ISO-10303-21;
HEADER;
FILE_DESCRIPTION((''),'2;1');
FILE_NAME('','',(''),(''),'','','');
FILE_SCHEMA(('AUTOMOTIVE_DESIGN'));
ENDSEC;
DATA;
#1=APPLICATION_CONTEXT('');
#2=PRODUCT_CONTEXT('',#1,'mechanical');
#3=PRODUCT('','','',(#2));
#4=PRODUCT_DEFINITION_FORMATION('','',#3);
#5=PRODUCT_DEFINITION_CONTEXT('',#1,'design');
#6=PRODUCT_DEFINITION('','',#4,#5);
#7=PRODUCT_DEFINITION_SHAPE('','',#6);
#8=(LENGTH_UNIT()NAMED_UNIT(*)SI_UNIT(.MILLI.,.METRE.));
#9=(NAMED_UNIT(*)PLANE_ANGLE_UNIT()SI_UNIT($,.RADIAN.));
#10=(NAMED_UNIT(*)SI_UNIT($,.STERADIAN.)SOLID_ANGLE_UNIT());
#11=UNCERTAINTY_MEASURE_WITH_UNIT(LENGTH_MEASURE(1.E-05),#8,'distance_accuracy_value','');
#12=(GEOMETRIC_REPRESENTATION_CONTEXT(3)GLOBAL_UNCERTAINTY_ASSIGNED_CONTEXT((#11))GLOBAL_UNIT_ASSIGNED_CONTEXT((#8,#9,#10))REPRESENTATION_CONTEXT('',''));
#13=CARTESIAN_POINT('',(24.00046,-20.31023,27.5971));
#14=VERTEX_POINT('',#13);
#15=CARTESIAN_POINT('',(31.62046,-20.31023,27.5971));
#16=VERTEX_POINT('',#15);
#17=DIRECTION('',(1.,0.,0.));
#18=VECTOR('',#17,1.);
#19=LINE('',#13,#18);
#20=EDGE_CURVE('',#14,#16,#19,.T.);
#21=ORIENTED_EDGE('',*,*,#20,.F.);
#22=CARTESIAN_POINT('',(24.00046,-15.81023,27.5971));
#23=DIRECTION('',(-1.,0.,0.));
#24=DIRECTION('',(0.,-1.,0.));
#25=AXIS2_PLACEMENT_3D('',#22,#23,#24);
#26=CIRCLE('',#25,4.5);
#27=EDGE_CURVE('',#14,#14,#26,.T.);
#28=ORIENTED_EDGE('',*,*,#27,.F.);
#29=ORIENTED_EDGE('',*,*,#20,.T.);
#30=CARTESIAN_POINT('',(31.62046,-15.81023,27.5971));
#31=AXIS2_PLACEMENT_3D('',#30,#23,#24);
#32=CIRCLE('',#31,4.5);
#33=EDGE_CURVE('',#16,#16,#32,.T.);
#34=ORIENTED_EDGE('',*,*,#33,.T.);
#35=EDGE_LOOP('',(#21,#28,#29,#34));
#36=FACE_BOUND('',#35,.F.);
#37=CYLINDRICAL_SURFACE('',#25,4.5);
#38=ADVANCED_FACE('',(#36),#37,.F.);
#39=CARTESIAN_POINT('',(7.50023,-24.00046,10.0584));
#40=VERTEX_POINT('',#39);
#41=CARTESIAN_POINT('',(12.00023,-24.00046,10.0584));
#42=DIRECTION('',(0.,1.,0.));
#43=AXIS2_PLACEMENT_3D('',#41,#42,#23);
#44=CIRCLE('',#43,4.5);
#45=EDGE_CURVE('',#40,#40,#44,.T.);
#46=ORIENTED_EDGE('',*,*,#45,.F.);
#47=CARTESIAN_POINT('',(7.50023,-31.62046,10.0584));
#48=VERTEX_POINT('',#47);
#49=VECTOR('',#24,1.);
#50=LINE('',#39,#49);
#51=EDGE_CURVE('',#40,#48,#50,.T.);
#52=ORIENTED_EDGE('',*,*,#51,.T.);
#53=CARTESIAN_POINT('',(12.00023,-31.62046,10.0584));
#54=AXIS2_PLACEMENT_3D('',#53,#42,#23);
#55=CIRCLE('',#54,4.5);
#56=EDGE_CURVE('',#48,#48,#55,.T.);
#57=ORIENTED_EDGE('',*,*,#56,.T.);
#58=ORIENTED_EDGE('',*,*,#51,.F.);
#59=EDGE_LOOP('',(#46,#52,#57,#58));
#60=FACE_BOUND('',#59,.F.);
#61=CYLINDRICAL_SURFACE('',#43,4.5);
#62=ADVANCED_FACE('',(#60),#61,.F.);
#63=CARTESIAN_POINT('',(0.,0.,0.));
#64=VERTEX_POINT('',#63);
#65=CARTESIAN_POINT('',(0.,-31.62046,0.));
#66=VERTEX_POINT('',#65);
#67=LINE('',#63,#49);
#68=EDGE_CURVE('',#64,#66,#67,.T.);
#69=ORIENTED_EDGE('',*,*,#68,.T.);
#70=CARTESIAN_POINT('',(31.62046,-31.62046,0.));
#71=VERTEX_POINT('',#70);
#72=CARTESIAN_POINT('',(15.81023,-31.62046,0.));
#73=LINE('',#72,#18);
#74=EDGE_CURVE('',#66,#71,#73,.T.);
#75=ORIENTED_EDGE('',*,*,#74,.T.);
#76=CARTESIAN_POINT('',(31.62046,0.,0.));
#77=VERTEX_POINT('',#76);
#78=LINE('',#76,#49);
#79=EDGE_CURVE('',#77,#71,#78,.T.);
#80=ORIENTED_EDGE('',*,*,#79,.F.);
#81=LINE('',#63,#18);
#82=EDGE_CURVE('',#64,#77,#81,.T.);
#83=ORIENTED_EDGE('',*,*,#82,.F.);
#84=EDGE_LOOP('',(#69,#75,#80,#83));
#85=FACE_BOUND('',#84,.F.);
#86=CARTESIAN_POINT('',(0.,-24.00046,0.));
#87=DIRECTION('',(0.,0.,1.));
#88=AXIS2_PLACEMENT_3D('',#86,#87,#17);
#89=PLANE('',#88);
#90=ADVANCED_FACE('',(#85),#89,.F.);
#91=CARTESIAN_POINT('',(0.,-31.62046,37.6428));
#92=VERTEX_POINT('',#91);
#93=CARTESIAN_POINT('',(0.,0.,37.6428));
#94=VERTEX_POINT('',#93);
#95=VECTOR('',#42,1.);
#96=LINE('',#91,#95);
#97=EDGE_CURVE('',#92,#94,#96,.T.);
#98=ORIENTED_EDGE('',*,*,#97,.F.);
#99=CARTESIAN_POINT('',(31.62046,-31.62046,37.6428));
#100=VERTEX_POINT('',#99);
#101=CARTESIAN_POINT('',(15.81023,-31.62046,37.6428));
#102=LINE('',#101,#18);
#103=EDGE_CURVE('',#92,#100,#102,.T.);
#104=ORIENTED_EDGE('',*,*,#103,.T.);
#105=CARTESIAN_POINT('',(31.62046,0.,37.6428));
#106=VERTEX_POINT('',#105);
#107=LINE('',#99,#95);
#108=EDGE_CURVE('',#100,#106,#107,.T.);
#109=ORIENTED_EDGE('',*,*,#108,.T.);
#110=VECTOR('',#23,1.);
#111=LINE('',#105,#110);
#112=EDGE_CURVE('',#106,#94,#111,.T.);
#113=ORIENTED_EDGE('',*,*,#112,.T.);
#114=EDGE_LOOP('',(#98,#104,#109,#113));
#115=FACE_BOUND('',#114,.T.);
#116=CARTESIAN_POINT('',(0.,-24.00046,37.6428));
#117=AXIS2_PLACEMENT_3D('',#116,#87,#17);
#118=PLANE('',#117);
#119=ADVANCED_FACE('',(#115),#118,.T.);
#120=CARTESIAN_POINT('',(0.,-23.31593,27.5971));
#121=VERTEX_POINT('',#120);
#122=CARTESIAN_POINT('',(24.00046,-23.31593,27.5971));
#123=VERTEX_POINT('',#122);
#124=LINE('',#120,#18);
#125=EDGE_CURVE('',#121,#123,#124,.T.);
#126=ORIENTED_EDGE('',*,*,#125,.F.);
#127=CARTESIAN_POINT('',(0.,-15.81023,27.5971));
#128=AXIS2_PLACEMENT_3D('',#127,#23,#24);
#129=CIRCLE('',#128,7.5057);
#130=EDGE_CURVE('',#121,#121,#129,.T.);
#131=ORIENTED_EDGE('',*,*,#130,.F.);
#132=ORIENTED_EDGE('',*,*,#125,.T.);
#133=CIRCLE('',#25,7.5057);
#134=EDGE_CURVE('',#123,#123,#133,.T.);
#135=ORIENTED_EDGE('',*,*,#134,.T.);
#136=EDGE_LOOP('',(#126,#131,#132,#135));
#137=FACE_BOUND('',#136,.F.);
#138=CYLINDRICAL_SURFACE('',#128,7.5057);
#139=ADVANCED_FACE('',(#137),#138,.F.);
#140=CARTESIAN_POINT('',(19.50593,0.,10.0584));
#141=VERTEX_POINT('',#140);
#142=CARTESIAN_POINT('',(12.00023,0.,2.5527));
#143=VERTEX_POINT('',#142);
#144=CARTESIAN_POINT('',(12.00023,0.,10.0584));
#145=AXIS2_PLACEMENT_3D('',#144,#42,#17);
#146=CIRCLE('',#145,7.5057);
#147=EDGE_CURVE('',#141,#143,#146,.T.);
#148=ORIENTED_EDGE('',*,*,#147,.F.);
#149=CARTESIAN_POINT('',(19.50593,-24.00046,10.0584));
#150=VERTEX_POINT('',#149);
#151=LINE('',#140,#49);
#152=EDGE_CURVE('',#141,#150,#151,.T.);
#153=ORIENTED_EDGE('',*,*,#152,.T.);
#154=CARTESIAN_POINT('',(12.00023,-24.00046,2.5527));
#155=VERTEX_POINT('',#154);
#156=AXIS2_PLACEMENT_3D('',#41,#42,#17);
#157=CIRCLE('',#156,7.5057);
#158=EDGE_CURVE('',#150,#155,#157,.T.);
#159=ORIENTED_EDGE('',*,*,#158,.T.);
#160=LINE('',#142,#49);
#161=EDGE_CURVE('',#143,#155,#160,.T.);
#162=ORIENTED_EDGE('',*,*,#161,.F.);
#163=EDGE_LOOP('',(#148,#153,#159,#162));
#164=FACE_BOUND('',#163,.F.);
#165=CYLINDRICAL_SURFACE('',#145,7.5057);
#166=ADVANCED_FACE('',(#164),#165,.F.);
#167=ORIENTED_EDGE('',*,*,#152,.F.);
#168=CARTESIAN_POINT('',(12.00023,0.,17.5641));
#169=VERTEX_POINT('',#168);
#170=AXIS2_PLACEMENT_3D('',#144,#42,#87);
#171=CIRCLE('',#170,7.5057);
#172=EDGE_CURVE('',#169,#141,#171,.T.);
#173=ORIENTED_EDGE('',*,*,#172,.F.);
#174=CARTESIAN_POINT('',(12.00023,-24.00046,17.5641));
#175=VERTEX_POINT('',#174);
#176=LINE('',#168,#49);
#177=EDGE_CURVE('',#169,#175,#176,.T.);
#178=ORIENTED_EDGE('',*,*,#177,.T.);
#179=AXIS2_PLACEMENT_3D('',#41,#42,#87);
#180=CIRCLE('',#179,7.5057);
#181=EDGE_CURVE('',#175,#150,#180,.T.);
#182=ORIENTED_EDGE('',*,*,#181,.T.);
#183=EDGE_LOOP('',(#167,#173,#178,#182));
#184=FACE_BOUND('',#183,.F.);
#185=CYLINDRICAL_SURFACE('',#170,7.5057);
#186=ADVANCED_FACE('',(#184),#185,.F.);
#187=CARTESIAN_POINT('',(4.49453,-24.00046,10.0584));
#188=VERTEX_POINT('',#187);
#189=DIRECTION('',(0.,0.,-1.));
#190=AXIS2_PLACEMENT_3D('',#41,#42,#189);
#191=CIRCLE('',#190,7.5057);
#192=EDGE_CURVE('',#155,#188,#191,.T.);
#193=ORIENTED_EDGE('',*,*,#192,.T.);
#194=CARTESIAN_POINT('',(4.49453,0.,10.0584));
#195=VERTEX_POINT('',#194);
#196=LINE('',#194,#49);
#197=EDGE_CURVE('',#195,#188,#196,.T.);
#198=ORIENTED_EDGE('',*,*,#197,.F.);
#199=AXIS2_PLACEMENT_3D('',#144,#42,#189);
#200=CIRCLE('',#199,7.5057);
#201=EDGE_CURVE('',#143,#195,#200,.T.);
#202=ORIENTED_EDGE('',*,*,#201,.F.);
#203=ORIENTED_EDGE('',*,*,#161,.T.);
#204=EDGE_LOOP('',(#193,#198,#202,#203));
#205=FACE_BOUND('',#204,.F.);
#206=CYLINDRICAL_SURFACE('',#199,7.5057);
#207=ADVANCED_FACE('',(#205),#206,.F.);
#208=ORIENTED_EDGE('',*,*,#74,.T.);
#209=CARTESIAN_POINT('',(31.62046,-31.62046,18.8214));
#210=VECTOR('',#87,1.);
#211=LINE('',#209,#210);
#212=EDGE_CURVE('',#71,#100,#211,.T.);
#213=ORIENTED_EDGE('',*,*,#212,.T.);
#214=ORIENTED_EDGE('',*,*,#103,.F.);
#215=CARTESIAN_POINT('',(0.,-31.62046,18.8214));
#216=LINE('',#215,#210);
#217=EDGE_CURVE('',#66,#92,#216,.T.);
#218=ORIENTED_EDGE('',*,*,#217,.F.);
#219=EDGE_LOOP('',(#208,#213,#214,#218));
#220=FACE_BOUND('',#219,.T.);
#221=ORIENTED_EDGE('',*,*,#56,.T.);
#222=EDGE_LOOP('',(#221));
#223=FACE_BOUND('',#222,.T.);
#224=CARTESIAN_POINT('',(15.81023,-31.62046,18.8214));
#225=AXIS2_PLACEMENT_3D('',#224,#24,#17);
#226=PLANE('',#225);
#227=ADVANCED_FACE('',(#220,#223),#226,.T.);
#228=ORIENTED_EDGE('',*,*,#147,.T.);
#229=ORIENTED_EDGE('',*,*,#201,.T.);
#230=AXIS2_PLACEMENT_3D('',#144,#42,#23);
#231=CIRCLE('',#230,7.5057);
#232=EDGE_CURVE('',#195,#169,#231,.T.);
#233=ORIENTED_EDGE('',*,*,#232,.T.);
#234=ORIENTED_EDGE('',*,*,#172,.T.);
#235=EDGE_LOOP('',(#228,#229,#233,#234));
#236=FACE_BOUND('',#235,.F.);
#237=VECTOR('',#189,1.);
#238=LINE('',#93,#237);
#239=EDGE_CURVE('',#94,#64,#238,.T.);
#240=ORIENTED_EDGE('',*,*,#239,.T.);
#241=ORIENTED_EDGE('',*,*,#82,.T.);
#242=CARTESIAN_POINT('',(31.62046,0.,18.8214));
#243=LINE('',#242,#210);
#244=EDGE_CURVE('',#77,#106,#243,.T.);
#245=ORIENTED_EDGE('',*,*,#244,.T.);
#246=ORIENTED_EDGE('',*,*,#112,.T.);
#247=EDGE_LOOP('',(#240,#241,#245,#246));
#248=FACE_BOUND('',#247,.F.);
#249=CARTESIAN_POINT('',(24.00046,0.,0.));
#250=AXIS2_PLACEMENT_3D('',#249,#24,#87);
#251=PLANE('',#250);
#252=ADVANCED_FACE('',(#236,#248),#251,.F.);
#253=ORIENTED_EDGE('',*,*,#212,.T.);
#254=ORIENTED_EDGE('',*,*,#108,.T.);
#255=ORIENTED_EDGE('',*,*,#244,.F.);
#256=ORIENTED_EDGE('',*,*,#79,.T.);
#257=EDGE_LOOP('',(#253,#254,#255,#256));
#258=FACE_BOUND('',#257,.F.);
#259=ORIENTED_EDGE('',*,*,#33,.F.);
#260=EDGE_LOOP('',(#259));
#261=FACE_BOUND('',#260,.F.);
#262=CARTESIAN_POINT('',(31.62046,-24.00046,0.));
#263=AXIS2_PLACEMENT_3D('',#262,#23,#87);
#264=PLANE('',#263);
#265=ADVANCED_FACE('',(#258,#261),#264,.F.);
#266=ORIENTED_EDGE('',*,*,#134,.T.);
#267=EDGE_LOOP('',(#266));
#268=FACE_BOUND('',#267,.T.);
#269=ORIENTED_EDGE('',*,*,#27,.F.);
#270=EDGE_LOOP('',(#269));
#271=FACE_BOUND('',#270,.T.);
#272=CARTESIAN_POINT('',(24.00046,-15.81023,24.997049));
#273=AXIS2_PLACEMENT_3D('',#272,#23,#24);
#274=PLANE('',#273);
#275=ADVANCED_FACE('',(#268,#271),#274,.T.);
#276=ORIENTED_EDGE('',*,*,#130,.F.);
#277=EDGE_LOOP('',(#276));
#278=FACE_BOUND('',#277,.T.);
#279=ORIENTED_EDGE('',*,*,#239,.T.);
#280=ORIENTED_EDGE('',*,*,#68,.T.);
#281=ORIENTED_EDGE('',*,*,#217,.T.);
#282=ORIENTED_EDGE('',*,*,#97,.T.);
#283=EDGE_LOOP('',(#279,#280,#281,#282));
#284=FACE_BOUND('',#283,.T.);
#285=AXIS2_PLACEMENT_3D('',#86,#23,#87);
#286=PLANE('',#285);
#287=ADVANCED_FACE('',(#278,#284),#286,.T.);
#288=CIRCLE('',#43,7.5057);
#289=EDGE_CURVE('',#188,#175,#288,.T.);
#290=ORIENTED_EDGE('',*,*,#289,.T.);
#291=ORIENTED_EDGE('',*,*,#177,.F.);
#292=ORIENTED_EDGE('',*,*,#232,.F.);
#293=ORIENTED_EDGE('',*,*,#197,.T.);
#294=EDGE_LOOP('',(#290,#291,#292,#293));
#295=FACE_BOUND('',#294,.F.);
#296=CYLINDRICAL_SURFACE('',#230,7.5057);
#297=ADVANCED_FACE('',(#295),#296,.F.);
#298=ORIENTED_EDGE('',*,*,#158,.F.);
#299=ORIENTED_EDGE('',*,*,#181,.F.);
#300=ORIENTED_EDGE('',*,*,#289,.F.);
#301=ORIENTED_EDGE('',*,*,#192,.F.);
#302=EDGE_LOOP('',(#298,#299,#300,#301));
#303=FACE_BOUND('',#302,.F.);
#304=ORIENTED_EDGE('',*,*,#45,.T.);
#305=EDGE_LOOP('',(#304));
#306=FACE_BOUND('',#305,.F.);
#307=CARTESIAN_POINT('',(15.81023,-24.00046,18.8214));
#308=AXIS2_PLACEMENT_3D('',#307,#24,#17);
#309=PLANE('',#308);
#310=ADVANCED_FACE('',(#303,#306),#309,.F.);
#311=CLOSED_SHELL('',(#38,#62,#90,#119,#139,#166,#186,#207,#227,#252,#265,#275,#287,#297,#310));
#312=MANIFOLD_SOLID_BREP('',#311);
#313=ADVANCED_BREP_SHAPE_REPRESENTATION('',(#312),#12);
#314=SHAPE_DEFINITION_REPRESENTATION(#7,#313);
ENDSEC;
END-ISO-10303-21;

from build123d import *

# Parameters (mm, degrees)
F0_W      = 12.00023
F0_H      = 10.0584
F1_DEPTH  = 24.00046
F2_W      = 24.00046
F2_H      = 37.6428
F3_DEPTH  = 7.62
F4_W      = 31.62046
F4_H      = 37.6428
F4_R      = 7.5057
F5_DEPTH  = 7.62
F6_R      = 4.5
F7_DEPTH  = 25.4
F9_DEPTH  = 24.00046
F10_R     = 4.5
F11_DEPTH = 25.4


with BuildPart() as f1:
    # F0 (on Front) → F1 (new body)
    with BuildSketch(Plane.XZ):
        with BuildLine():
            Line((0, 10.0584), (0, 0))
            Line((0, 0), (12.00023, 0))
            Line((12.00023, 0), (12.00023, 2.5527))
            ThreePointArc((12.00023, 2.5527), (6.6928986324, 4.7510686324), (4.49453, 10.0584))
            Line((4.49453, 10.0584), (0, 10.0584))
        make_face()
        with BuildLine():
            Line((0, 27.5844), (0, 10.0584))
            Line((0, 10.0584), (4.49453, 10.0584))
            ThreePointArc((4.49453, 10.0584), (6.6928986324, 15.3657313676), (12.00023, 17.5641))
            Line((12.00023, 17.5641), (12.00023, 27.5844))
            Line((12.00023, 27.5844), (0, 27.5844))
        make_face()
        with Locations((6.000115, 32.6136)):
            Rectangle(F0_W, F0_H)
        with Locations((18.000345, 32.6136)):
            Rectangle(F0_W, F0_H)
        with BuildLine():
            Line((19.50593, 10.0584), (24.00046, 10.0584))
            Line((24.00046, 10.0584), (24.00046, 27.5844))
            Line((24.00046, 27.5844), (12.00023, 27.5844))
            Line((12.00023, 27.5844), (12.00023, 17.5641))
            ThreePointArc((12.00023, 17.5641), (17.3075613676, 15.3657313676), (19.50593, 10.0584))
        make_face()
        with BuildLine():
            Line((12.00023, 2.5527), (12.00023, 0))
            Line((12.00023, 0), (24.00046, 0))
            Line((24.00046, 0), (24.00046, 10.0584))
            Line((24.00046, 10.0584), (19.50593, 10.0584))
            ThreePointArc((19.50593, 10.0584), (17.3075613676, 4.7510686324), (12.00023, 2.5527))
        make_face()
    extrude(amount=F1_DEPTH)

    # F2 (on face) → F3 (join)
    with BuildSketch(Plane.YZ.offset(24.00046)):
        with Locations((-12.00023, 18.8214)):
            Rectangle(F2_W, F2_H)
    extrude(amount=F3_DEPTH)

    # F4 (on face) → F5 (join)
    with BuildSketch(Plane.XZ.offset(24.00046)):
        with Locations((15.81023, 18.8214)):
            Rectangle(F4_W, F4_H)
        with Locations((12.00023, 10.0584)):
            Circle(F4_R, mode=Mode.SUBTRACT)
        with Locations((12.00023, 10.0584)):
            Circle(F4_R)
    extrude(amount=F5_DEPTH)

    # F6 (on face) → F7 (cut)
    with BuildSketch(Plane(origin=(0, -24.00046, 0), x_dir=(-1, 0, 0), z_dir=(0, 1, 0))):
        with Locations((-12.00023, 10.0584)):
            Circle(F6_R)
    extrude(amount=-F7_DEPTH, mode=Mode.SUBTRACT)

    # F8 (on face) → F9 (cut)
    with BuildSketch(Plane(origin=(0, 0, 0), x_dir=(0, -1, 0), z_dir=(-1, 0, 0))):
        with BuildLine():
            ThreePointArc((8.30453, 27.5971), (15.81023, 20.0914), (23.31593, 27.5971))
            Line((23.31593, 27.5971), (15.81023, 27.5971))
            Line((15.81023, 27.5971), (8.30453, 27.5971))
        make_face()
        with BuildLine():
            Line((15.81023, 27.5971), (23.31593, 27.5971))
            ThreePointArc((23.31593, 27.5971), (15.81023, 35.1028), (8.30453, 27.5971))
            Line((8.30453, 27.5971), (15.81023, 27.5971))
        make_face()
    extrude(amount=-F9_DEPTH, mode=Mode.SUBTRACT)

    # F10 (on face) → F11 (cut)
    with BuildSketch(Plane(origin=(24.00046, 0, 0), x_dir=(0, -1, 0), z_dir=(-1, 0, 0))):
        with Locations((15.81023, 27.5971)):
            Circle(F10_R)
    extrude(amount=-F11_DEPTH, mode=Mode.SUBTRACT)


solid = f1.part
